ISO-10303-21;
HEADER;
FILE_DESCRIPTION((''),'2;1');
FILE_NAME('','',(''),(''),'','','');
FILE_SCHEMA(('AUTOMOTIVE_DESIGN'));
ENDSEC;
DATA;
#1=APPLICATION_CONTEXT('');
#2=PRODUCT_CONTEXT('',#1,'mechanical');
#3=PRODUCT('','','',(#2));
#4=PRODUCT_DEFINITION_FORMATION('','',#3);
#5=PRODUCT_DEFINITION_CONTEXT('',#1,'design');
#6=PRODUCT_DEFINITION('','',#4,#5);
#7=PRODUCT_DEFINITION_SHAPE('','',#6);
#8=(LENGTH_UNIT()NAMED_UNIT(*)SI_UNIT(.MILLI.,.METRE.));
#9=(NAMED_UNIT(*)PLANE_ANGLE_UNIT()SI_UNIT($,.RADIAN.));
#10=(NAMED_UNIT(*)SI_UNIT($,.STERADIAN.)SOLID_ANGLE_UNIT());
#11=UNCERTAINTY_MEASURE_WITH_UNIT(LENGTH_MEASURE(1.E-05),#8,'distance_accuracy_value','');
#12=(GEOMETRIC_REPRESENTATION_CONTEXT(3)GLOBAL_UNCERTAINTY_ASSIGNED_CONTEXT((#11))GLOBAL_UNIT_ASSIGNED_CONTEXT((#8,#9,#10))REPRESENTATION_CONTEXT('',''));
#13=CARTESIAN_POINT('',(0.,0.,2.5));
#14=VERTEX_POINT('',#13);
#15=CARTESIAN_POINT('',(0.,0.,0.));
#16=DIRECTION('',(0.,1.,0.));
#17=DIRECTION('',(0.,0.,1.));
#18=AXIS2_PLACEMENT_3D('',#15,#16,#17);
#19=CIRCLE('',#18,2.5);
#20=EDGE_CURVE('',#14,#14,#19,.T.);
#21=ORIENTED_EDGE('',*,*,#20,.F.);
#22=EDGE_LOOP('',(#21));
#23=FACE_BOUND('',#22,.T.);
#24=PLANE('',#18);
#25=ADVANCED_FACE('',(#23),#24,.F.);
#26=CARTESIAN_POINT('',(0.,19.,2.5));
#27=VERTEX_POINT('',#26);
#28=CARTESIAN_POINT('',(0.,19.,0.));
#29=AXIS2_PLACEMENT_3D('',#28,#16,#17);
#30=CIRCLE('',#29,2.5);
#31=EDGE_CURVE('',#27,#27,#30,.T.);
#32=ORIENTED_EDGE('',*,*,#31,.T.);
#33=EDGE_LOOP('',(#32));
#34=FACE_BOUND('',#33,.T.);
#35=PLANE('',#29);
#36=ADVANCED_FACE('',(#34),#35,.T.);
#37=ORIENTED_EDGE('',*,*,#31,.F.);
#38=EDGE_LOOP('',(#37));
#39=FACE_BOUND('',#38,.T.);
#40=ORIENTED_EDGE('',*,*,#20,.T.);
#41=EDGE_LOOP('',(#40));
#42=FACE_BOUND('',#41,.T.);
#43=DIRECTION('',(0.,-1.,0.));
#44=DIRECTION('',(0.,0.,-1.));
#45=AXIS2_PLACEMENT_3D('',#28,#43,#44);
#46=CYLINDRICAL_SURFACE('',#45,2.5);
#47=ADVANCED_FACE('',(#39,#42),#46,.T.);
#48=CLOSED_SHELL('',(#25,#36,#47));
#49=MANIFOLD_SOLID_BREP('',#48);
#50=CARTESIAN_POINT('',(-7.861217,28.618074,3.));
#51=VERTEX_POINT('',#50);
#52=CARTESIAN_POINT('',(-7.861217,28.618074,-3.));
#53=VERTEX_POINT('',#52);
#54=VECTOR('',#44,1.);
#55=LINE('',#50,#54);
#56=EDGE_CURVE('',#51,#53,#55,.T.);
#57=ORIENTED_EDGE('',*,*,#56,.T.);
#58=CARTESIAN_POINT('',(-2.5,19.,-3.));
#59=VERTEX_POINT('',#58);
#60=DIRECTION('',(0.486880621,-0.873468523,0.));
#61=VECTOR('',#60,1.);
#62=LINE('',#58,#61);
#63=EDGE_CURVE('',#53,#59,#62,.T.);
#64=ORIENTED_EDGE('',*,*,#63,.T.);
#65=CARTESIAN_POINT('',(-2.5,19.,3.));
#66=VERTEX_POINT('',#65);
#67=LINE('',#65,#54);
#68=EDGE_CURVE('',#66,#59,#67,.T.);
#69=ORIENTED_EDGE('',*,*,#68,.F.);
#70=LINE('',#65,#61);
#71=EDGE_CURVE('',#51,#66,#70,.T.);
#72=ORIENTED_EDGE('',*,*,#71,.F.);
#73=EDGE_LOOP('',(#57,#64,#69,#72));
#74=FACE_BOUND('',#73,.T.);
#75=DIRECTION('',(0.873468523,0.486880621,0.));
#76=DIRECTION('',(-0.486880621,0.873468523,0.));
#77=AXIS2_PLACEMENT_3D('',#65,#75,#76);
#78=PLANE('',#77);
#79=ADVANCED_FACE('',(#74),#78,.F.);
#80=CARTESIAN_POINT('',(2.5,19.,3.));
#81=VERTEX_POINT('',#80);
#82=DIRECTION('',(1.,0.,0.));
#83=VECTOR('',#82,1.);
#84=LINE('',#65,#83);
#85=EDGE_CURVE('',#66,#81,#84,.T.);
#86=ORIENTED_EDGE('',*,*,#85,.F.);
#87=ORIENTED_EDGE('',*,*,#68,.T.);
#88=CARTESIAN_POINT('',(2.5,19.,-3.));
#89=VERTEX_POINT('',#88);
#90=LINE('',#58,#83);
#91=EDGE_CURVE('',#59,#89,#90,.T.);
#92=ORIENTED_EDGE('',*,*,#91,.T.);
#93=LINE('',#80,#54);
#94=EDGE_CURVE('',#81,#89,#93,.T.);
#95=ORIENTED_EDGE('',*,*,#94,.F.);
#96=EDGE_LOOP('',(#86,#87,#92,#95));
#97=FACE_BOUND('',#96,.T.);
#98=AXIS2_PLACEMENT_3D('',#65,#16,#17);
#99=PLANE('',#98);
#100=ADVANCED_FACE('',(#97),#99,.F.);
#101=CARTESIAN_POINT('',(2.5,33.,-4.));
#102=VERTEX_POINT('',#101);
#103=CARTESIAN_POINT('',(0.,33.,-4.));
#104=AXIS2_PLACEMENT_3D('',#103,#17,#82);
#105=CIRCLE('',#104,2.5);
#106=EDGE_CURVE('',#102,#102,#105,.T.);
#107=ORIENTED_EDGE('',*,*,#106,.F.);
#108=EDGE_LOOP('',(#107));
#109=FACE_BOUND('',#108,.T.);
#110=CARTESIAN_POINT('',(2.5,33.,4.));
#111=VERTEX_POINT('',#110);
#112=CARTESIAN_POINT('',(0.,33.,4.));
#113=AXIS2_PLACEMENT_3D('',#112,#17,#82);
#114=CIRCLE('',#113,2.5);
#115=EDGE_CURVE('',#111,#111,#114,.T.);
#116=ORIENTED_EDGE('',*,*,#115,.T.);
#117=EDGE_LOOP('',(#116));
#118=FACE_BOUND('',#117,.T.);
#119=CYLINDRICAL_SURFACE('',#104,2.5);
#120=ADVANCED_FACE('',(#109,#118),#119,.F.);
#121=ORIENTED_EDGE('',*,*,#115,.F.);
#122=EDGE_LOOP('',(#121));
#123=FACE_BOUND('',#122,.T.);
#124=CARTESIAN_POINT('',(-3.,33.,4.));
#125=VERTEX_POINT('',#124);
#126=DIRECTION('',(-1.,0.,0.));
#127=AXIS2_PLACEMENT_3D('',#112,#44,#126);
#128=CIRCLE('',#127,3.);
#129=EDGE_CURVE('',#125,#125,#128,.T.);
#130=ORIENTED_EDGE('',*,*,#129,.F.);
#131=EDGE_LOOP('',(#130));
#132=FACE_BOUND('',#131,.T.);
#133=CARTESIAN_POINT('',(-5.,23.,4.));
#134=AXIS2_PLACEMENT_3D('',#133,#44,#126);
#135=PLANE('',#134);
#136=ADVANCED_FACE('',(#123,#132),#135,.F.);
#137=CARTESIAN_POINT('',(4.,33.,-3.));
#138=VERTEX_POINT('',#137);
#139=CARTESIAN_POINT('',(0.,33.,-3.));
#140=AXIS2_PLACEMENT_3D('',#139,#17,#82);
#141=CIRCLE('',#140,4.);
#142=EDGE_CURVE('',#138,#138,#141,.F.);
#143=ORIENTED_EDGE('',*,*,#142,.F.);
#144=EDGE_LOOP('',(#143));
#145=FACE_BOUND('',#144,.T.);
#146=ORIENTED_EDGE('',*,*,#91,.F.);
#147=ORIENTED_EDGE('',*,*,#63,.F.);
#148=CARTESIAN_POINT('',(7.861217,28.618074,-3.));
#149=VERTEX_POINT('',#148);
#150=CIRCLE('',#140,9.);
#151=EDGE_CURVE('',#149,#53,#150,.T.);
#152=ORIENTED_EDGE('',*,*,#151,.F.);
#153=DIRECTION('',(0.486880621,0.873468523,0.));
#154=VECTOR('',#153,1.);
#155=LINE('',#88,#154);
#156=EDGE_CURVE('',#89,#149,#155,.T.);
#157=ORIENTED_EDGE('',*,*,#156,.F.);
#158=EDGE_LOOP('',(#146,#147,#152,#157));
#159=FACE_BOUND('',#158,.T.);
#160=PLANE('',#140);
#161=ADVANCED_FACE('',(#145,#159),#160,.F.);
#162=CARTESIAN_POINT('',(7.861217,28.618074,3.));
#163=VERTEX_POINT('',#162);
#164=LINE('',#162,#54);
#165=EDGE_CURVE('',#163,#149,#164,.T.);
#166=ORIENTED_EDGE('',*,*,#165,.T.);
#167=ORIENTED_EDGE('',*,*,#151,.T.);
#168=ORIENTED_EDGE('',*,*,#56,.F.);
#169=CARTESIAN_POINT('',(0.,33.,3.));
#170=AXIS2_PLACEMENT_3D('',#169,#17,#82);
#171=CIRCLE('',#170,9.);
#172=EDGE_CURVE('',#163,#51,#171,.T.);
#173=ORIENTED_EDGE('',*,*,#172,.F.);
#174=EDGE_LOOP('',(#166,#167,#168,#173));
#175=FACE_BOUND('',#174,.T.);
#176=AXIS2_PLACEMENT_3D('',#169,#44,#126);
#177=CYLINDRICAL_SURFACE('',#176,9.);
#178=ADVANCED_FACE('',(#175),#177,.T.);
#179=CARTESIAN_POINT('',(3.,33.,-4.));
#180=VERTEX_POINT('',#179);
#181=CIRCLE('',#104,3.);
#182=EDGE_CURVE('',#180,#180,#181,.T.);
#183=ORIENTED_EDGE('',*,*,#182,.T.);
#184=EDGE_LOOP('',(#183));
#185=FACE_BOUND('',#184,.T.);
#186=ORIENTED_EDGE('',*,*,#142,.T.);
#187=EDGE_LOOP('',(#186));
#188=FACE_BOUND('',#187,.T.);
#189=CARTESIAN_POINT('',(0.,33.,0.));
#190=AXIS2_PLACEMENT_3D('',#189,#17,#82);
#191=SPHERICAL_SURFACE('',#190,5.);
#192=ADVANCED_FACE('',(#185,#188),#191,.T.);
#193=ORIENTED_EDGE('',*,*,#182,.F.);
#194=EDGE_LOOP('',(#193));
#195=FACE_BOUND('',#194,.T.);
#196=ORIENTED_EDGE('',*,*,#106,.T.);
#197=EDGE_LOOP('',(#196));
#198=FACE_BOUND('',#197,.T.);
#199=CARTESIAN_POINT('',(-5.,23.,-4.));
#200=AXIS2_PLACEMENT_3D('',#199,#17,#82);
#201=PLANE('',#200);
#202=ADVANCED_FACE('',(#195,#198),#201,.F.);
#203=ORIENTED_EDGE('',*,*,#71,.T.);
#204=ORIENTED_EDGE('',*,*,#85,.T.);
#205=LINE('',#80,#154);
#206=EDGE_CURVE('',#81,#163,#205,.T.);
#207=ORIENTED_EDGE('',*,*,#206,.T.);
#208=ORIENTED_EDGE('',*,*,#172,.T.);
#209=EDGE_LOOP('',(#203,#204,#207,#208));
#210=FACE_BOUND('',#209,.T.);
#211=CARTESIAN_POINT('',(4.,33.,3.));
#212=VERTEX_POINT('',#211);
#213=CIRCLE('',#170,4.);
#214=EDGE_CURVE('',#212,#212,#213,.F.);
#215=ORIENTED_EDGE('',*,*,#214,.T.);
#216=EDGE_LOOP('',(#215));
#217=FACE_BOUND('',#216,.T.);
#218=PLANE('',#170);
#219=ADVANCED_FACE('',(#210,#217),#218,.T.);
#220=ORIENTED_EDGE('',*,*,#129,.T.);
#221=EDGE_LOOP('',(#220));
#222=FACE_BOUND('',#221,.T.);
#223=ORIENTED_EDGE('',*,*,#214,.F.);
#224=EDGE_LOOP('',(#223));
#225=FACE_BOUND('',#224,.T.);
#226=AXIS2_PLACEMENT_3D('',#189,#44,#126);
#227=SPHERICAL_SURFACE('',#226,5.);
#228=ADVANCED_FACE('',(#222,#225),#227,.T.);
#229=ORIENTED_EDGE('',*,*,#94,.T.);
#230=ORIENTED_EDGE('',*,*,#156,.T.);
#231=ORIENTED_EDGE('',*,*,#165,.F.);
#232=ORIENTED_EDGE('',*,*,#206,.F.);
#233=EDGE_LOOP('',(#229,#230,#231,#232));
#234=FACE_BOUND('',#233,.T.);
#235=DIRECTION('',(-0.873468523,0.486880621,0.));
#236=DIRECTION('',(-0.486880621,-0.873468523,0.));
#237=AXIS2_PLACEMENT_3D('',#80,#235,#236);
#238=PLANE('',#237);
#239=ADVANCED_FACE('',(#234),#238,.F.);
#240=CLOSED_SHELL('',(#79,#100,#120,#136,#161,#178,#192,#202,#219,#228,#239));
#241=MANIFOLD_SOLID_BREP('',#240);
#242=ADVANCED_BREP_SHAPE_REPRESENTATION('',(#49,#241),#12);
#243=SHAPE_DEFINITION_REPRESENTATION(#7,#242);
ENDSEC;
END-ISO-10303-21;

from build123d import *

# Parameters (mm, degrees)
SKETCH2_R           = 2.5
BOSS_EXTRUDE1_DEPTH = 19
BOSS_EXTRUDE2_DEPTH = 3
SKETCH7_W           = 10
SKETCH7_H           = 20
CUT_EXTRUDE2_DEPTH  = 5
SKETCH4_R           = 2.5
CUT_EXTRUDE1_DEPTH  = 44.69210455


# Read off the part's stored shape, not the designer's step: Sweep1
with BuildPart() as part:
    # Sketch2 → Boss-Extrude1 (new body)
    with BuildSketch(Plane(origin=(0, 0, 0), x_dir=(1, 0, 0), z_dir=(0, 1, 0))):
        with Locations(Location((0, 0, 0), (0, 0, 270))):
            Circle(SKETCH2_R)
    extrude(amount=BOSS_EXTRUDE1_DEPTH)


with BuildPart() as body_2:
    # Sketch3 → Boss-Extrude2 (new, symmetric)
    with BuildSketch(Plane.XY):
        with BuildLine():
            Line((-2.5, 19), (-7.861216709, 28.618074412))
            ThreePointArc((-7.861216709, 28.618074412), (0, 42), (7.861216709, 28.618074412))
            Line((7.861216709, 28.618074412), (2.5, 19))
            Line((2.5, 19), (-2.5, 19))
        make_face()
    extrude(amount=BOSS_EXTRUDE2_DEPTH, both=True)

    # Sweep1 outline → Sweep1 (revolve)
    with BuildSketch(Plane.XZ.offset(-33)):
        with BuildLine():
            Line((0, -2.999999996), (0, -5))
            ThreePointArc((0, -5), (2.23606798, -4.472135954), (4.000000003, -2.999999996))
            Line((4.000000003, -2.999999996), (0, -2.999999996))
        make_face()
        with BuildLine():
            Line((0, 2.999999996), (4.000000003, 2.999999996))
            ThreePointArc((4.000000003, 2.999999996), (2.23606798, 4.472135954), (0, 5))
            Line((0, 5), (0, 2.999999996))
        make_face()
    revolve(axis=Axis((0, 33, 0), (0, 0, 1)))

    # Sketch7 → Cut-Extrude2 (cut, symmetric)
    with BuildSketch(Plane(origin=(0, 0, 0), x_dir=(0, 0, -1), z_dir=(1, 0, 0))):
        with Locations((9, 33)):
            Rectangle(SKETCH7_W, SKETCH7_H)
        with Locations((-9, 33)):
            Rectangle(SKETCH7_W, SKETCH7_H)
    extrude(amount=CUT_EXTRUDE2_DEPTH, both=True, mode=Mode.SUBTRACT)

    # Sketch4 → Cut-Extrude1 (cut, through all)
    with BuildSketch(Plane.XY.offset(4)):
        with Locations((0, 33)):
            Circle(SKETCH4_R)
    extrude(amount=-CUT_EXTRUDE1_DEPTH, mode=Mode.SUBTRACT)


solid = Compound([part.part, body_2.part])
